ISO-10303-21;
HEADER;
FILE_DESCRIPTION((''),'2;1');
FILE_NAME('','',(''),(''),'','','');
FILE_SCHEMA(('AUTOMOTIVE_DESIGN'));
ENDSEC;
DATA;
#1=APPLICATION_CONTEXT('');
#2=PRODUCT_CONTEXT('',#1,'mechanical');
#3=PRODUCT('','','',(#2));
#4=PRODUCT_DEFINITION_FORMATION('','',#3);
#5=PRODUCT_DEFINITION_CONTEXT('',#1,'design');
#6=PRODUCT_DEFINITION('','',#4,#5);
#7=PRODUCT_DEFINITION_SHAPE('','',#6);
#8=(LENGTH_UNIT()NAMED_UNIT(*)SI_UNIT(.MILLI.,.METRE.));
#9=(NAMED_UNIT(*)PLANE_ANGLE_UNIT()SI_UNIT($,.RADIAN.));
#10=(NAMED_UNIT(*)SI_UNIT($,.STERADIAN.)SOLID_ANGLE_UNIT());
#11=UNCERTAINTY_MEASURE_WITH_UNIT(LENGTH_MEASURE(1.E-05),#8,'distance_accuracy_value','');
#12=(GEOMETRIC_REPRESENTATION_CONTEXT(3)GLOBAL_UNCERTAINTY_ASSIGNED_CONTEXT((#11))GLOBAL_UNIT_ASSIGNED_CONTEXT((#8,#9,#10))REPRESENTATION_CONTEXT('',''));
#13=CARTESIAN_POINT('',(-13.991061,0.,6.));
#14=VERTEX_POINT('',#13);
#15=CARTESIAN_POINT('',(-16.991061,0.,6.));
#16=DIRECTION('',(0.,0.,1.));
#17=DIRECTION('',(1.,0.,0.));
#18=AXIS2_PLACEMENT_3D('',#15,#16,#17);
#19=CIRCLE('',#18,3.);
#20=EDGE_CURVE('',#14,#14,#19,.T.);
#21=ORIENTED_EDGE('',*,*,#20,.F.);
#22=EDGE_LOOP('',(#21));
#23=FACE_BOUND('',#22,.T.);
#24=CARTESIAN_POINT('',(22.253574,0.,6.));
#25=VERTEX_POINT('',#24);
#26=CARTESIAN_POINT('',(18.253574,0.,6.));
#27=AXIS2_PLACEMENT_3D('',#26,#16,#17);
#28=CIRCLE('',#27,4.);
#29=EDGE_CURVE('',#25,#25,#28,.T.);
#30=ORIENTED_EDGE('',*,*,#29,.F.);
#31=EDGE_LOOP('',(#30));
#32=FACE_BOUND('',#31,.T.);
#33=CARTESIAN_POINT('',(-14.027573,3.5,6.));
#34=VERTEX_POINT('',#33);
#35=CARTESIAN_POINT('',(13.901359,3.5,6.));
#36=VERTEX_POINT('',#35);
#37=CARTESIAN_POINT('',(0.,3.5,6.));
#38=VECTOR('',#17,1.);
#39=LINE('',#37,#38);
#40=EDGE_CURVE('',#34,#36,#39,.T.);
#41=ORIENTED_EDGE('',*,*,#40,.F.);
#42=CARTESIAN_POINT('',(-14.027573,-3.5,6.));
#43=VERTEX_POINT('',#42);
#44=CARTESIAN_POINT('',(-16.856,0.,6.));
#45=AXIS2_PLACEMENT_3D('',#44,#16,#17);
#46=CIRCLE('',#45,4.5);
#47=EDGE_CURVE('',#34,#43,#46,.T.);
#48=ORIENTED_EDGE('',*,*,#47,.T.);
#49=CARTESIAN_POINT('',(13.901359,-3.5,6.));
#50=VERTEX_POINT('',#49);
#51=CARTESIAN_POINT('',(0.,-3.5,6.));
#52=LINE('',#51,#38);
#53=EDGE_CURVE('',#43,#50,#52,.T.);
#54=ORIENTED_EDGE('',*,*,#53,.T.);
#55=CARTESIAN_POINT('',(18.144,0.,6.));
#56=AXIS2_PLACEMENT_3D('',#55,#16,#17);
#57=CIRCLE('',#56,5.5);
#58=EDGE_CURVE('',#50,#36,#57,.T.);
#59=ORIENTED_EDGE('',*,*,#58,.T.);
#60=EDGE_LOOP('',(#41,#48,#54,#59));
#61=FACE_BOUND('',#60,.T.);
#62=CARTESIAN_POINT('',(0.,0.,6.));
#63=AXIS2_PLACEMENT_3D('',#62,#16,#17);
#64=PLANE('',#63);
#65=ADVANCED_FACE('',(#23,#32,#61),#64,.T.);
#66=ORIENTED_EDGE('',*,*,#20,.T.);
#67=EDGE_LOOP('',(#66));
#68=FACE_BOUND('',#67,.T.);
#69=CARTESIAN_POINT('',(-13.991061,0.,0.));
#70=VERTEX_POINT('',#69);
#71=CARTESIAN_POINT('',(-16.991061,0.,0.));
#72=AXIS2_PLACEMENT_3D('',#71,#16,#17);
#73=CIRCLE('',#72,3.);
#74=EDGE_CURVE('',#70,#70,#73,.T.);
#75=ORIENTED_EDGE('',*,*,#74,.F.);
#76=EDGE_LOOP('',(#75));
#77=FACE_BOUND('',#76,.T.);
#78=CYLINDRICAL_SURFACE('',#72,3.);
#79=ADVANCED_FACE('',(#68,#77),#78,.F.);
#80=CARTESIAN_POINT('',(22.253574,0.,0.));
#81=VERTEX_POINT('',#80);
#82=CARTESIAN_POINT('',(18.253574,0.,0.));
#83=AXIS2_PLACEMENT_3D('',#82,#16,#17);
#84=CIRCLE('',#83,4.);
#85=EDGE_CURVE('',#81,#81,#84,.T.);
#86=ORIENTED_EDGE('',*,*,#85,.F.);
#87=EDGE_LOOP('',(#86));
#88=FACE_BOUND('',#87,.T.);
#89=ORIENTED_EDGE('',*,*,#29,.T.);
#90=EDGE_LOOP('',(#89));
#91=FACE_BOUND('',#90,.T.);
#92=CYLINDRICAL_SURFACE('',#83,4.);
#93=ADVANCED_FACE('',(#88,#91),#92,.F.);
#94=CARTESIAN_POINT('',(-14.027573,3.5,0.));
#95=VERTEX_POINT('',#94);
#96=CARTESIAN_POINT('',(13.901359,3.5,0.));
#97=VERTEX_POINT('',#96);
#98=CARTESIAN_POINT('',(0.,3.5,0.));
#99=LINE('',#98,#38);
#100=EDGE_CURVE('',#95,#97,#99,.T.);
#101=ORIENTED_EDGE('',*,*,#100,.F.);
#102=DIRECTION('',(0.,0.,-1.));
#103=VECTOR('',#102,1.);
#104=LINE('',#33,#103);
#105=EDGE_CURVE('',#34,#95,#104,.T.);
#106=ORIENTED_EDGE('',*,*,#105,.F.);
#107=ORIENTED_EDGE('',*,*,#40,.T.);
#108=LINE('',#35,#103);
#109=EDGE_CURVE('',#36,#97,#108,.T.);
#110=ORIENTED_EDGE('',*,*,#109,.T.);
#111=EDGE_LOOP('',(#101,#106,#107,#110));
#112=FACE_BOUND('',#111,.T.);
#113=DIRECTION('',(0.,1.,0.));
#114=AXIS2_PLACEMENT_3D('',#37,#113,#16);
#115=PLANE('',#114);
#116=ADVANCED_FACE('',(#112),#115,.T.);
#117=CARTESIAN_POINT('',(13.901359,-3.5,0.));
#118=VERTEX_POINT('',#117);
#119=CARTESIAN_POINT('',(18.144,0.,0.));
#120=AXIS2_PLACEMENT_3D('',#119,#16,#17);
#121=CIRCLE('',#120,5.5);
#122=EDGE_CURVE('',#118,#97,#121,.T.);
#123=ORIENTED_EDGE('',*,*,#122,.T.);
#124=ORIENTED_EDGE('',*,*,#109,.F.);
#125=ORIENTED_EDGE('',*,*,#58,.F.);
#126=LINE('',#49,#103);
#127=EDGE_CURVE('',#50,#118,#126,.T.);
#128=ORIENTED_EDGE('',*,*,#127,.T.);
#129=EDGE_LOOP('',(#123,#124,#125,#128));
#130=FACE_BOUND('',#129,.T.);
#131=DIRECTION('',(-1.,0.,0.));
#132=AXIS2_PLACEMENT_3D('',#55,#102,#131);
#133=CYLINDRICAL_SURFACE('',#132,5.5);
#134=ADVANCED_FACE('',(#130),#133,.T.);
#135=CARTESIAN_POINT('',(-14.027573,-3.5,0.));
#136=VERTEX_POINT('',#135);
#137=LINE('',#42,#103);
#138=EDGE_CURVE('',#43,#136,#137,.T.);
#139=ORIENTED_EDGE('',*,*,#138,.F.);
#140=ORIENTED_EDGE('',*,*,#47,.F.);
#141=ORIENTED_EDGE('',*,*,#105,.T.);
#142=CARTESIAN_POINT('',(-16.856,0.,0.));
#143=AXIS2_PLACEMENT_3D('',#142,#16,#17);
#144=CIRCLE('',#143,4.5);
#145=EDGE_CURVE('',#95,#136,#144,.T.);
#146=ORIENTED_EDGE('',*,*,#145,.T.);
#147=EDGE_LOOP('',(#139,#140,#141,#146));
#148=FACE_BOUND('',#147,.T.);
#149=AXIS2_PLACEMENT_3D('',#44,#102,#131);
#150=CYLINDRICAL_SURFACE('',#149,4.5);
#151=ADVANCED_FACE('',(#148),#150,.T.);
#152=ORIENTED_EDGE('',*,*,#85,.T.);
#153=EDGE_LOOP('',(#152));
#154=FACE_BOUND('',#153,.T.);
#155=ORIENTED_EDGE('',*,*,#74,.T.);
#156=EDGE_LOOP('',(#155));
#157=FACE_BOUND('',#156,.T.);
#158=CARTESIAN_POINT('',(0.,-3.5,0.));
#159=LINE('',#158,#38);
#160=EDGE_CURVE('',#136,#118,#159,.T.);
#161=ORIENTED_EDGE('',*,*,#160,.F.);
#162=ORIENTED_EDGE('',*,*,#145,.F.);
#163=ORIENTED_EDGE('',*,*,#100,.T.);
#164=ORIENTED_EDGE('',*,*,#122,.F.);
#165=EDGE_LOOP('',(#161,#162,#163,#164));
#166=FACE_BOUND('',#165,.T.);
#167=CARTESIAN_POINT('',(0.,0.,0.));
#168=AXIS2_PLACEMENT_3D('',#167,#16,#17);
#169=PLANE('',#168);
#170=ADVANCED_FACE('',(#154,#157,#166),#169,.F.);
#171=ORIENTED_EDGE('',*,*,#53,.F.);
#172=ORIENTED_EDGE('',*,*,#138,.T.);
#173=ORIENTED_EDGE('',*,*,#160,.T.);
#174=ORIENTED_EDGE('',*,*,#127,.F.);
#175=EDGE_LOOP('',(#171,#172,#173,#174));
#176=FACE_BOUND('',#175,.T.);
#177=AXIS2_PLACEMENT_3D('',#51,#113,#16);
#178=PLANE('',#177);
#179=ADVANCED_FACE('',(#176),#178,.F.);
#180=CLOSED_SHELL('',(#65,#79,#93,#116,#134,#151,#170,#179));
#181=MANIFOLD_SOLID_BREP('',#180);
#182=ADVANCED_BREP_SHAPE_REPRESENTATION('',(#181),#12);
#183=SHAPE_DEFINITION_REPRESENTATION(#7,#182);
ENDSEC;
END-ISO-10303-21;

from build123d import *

# Parameters (mm, degrees)
BOSS_EXTRUDE2_DEPTH      = 6
CUT_EXTRUDE1_OUTLINE_R   = 4
CUT_EXTRUDE1_OUTLINE_R_2 = 3
CUT_EXTRUDE1_DEPTH       = 6


# Read off the part's stored shape, not the designer's step: Cut-Extrude1
with BuildPart() as part:
    # Sketch1 → Boss-Extrude2 (new body)
    with BuildSketch(Plane.XY):
        with BuildLine():
            Line((-15.512, -3.5), (-15.512, 3.5))
            Line((-15.512, 3.5), (-14.027572875, 3.5))
            ThreePointArc((-14.027572875, 3.5), (-21.356, 0), (-14.027572875, -3.5))
            Line((-14.027572875, -3.5), (-15.512, -3.5))
        make_face()
        with BuildLine():
            Line((-14.027572875, 3.5), (-15.512, 3.5))
            Line((-15.512, 3.5), (-15.512, -3.5))
            Line((-15.512, -3.5), (-14.027572875, -3.5))
            ThreePointArc((-14.027572875, -3.5), (-12.795339828, -1.939339828), (-12.356, 0))
            ThreePointArc((-12.356, 0), (-12.795339828, 1.939339828), (-14.027572875, 3.5))
        make_face()
        with BuildLine():
            Line((13.901359313, 3.5), (-14.027572875, 3.5))
            ThreePointArc((-14.027572875, 3.5), (-12.795339828, 1.939339828), (-12.356, 0))
            ThreePointArc((-12.356, 0), (-12.795339828, -1.939339828), (-14.027572875, -3.5))
            Line((-14.027572875, -3.5), (13.901359313, -3.5))
            ThreePointArc((13.901359313, -3.5), (12.644, 0), (13.901359313, 3.5))
        make_face()
        with BuildLine():
            ThreePointArc((23.644, 0), (20.003499425, 5.176124215), (13.901359313, 3.5))
            Line((13.901359313, 3.5), (15.512, 3.5))
            Line((15.512, 3.5), (15.512, -3.5))
            Line((15.512, -3.5), (13.901359313, -3.5))
            ThreePointArc((13.901359313, -3.5), (20.003499425, -5.176124215), (23.644, 0))
        make_face()
        with BuildLine():
            Line((15.512, 3.5), (13.901359313, 3.5))
            ThreePointArc((13.901359313, 3.5), (12.644, 0), (13.901359313, -3.5))
            Line((13.901359313, -3.5), (15.512, -3.5))
            Line((15.512, -3.5), (15.512, 3.5))
        make_face()
    extrude(amount=BOSS_EXTRUDE2_DEPTH)

    # Cut-Extrude1 outline → Cut-Extrude1 (cut)
    with BuildSketch(Plane.XY):
        with Locations((18.253573905, 0)):
            Circle(CUT_EXTRUDE1_OUTLINE_R)
        with Locations((-16.991061145, 0)):
            Circle(CUT_EXTRUDE1_OUTLINE_R_2)
    extrude(amount=CUT_EXTRUDE1_DEPTH, mode=Mode.SUBTRACT)


solid = part.part
